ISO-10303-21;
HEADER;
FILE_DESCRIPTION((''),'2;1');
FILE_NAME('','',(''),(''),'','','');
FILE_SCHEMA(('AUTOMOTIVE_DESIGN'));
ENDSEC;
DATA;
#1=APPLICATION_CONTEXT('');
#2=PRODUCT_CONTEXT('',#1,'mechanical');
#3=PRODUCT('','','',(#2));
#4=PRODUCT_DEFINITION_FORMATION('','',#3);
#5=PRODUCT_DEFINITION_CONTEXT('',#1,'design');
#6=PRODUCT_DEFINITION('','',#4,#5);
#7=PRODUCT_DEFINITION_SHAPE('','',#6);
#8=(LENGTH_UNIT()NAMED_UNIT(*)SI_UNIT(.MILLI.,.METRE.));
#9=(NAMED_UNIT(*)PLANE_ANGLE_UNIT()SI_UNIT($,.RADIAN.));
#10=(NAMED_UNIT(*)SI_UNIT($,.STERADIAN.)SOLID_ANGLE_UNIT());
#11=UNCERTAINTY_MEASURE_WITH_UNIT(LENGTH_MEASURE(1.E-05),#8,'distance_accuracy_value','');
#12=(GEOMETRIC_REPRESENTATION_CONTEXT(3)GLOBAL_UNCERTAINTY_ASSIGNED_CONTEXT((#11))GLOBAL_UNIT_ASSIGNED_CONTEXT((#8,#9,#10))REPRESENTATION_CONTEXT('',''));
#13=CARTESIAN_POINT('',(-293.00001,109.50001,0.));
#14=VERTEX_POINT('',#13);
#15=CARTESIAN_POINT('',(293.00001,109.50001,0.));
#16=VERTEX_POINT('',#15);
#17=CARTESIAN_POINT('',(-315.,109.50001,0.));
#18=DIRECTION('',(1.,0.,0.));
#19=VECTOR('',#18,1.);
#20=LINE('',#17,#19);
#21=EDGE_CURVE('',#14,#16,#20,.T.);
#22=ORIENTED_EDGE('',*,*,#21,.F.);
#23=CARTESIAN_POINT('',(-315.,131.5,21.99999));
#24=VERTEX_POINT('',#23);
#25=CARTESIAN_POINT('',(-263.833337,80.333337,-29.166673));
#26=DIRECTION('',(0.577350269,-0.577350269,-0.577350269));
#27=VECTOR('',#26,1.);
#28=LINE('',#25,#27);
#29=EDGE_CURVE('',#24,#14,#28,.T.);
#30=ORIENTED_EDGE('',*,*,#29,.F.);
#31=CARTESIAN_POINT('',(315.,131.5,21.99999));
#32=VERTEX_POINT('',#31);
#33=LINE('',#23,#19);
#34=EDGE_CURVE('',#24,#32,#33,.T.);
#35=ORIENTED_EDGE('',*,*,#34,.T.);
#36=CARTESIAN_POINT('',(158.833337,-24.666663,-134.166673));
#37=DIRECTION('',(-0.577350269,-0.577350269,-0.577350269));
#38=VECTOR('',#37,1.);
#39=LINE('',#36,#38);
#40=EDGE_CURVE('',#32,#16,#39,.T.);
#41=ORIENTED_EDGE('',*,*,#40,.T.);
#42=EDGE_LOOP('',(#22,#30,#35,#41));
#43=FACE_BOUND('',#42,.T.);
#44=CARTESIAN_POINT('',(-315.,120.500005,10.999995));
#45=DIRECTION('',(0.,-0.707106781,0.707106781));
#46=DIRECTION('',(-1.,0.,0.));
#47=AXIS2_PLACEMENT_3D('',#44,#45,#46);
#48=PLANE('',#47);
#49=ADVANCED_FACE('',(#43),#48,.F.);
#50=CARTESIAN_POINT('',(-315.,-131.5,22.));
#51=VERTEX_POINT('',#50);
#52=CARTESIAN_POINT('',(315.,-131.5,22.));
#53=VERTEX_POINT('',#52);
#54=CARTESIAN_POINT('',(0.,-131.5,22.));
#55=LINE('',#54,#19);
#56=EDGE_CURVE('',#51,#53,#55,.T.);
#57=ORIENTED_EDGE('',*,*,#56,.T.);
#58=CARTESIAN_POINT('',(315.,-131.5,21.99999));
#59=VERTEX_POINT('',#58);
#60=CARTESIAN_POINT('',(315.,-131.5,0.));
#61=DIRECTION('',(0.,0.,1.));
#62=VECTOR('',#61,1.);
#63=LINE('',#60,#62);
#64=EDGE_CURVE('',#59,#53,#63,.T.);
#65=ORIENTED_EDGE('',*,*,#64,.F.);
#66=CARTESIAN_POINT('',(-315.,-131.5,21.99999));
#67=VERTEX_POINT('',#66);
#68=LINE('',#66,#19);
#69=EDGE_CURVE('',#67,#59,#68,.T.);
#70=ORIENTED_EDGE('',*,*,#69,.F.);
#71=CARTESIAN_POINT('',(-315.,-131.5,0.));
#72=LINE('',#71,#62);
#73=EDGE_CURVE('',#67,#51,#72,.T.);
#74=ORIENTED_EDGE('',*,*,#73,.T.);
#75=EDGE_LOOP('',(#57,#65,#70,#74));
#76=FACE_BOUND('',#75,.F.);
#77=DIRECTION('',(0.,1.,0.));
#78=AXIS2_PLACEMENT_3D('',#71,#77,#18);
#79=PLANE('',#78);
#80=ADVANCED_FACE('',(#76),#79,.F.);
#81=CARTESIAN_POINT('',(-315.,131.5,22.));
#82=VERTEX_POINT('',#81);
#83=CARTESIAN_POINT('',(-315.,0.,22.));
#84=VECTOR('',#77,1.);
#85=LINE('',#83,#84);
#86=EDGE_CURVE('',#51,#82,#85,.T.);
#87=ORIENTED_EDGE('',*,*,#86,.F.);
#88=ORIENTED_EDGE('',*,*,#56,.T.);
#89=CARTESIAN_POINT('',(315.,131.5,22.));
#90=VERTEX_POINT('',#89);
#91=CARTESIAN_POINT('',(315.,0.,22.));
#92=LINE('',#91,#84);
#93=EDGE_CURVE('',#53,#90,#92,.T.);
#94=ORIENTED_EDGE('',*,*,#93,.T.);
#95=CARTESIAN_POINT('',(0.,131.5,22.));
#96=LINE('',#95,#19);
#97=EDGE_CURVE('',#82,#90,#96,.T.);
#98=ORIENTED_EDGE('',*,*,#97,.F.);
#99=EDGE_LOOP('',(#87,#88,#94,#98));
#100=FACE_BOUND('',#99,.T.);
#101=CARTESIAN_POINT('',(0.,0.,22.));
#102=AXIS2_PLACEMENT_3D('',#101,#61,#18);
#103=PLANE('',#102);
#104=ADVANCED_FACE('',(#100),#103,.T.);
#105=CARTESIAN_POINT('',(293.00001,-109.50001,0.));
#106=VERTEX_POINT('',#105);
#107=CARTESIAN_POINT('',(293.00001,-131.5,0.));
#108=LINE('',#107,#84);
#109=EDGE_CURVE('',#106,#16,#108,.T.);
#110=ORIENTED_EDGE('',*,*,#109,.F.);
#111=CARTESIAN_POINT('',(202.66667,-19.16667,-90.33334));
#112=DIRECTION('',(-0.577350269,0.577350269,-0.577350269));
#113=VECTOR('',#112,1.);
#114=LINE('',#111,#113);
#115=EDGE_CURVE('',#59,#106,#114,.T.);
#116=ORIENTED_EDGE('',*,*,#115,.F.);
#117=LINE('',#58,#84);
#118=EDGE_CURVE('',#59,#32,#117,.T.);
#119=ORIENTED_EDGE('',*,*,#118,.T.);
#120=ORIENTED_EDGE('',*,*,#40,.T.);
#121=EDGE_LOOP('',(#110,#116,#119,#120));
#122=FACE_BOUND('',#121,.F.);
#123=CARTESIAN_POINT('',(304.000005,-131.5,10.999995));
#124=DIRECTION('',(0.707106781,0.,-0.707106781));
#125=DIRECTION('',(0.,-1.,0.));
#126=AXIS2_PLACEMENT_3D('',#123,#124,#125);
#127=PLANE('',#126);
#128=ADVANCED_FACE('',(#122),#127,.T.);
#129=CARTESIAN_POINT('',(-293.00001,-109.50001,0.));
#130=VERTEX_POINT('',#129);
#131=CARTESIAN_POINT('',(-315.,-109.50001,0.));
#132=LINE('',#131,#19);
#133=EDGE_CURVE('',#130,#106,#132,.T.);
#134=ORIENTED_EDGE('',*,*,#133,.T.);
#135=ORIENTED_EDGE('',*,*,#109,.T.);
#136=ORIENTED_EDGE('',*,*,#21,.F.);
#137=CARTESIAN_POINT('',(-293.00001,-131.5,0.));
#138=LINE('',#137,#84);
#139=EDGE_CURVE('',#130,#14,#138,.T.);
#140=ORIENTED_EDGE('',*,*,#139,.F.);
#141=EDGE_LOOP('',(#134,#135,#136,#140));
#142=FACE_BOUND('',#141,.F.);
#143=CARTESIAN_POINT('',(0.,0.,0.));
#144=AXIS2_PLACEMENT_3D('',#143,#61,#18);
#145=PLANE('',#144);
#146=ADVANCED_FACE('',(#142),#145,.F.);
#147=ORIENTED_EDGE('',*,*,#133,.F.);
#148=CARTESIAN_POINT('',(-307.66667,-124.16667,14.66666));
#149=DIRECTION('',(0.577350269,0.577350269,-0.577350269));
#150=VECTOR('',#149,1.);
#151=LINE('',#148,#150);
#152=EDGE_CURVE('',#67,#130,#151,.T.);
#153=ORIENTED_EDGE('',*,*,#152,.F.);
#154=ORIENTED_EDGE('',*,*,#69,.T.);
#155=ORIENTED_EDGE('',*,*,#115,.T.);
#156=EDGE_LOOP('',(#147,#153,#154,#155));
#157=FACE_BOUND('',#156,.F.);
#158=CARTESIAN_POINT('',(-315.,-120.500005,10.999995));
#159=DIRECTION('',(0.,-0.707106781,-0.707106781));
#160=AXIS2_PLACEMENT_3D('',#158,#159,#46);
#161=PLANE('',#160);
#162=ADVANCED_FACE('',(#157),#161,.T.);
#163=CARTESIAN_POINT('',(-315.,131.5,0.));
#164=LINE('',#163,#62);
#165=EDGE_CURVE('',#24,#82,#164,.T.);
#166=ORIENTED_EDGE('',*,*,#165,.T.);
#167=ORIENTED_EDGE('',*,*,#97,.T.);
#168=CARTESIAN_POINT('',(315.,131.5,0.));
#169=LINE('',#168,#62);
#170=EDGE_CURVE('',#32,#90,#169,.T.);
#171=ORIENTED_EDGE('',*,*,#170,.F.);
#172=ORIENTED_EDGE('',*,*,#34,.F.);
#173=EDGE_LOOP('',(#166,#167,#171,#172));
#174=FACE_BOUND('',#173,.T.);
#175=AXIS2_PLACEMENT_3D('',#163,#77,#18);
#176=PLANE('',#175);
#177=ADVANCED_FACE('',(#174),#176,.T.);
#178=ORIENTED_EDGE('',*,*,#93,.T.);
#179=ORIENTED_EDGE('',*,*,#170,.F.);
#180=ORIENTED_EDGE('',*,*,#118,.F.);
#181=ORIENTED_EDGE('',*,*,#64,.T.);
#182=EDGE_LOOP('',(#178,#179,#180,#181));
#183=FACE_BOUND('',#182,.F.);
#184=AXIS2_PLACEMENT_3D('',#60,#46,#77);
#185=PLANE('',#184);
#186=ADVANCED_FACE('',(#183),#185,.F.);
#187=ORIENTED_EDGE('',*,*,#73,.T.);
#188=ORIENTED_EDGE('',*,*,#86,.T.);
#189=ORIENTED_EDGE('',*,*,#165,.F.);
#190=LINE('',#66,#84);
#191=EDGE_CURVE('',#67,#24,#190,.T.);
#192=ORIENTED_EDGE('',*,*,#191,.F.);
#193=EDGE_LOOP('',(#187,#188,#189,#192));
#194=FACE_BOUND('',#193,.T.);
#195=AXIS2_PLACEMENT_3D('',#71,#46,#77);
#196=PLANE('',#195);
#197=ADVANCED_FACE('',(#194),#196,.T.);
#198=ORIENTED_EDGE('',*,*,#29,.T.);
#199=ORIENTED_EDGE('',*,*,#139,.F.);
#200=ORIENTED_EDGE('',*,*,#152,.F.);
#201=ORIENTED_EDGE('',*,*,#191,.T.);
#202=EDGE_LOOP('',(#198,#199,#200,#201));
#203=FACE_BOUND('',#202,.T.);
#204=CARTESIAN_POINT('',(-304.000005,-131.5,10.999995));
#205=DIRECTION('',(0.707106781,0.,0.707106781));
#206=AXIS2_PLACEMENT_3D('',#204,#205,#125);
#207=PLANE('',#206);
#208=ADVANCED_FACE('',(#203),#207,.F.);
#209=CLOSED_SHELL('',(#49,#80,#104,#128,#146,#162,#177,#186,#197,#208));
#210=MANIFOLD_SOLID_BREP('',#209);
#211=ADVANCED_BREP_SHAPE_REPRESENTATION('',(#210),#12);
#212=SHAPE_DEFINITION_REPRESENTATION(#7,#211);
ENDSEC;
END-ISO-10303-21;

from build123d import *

# Parameters (mm, degrees)
F0_W     = 630
F0_H     = 263
F1_DEPTH = 22
F2_SIZE  = 21.99999


# Not quite as in the source:
# - a fillet or chamfer is up to 0.001 mm smaller than in the source, because OpenCascade refuses the exact size


with BuildPart() as f1:
    # F0 (on Top) → F1 (new body)
    with BuildSketch(Plane.XY):
        Rectangle(F0_W, F0_H)
    extrude(amount=F1_DEPTH)

    # F2 (size 22 in the source; OpenCascade refuses exactly that, so slightly less here)
    f2_edges = [f1.edges().sort_by_distance(p)[0] for p in [
        (0, 131.5, 0),
        (315, 0, 0),
        (0, -131.5, 0),
        (-315, 0, 0),
    ]]
    chamfer(f2_edges, length=F2_SIZE)


solid = f1.part
